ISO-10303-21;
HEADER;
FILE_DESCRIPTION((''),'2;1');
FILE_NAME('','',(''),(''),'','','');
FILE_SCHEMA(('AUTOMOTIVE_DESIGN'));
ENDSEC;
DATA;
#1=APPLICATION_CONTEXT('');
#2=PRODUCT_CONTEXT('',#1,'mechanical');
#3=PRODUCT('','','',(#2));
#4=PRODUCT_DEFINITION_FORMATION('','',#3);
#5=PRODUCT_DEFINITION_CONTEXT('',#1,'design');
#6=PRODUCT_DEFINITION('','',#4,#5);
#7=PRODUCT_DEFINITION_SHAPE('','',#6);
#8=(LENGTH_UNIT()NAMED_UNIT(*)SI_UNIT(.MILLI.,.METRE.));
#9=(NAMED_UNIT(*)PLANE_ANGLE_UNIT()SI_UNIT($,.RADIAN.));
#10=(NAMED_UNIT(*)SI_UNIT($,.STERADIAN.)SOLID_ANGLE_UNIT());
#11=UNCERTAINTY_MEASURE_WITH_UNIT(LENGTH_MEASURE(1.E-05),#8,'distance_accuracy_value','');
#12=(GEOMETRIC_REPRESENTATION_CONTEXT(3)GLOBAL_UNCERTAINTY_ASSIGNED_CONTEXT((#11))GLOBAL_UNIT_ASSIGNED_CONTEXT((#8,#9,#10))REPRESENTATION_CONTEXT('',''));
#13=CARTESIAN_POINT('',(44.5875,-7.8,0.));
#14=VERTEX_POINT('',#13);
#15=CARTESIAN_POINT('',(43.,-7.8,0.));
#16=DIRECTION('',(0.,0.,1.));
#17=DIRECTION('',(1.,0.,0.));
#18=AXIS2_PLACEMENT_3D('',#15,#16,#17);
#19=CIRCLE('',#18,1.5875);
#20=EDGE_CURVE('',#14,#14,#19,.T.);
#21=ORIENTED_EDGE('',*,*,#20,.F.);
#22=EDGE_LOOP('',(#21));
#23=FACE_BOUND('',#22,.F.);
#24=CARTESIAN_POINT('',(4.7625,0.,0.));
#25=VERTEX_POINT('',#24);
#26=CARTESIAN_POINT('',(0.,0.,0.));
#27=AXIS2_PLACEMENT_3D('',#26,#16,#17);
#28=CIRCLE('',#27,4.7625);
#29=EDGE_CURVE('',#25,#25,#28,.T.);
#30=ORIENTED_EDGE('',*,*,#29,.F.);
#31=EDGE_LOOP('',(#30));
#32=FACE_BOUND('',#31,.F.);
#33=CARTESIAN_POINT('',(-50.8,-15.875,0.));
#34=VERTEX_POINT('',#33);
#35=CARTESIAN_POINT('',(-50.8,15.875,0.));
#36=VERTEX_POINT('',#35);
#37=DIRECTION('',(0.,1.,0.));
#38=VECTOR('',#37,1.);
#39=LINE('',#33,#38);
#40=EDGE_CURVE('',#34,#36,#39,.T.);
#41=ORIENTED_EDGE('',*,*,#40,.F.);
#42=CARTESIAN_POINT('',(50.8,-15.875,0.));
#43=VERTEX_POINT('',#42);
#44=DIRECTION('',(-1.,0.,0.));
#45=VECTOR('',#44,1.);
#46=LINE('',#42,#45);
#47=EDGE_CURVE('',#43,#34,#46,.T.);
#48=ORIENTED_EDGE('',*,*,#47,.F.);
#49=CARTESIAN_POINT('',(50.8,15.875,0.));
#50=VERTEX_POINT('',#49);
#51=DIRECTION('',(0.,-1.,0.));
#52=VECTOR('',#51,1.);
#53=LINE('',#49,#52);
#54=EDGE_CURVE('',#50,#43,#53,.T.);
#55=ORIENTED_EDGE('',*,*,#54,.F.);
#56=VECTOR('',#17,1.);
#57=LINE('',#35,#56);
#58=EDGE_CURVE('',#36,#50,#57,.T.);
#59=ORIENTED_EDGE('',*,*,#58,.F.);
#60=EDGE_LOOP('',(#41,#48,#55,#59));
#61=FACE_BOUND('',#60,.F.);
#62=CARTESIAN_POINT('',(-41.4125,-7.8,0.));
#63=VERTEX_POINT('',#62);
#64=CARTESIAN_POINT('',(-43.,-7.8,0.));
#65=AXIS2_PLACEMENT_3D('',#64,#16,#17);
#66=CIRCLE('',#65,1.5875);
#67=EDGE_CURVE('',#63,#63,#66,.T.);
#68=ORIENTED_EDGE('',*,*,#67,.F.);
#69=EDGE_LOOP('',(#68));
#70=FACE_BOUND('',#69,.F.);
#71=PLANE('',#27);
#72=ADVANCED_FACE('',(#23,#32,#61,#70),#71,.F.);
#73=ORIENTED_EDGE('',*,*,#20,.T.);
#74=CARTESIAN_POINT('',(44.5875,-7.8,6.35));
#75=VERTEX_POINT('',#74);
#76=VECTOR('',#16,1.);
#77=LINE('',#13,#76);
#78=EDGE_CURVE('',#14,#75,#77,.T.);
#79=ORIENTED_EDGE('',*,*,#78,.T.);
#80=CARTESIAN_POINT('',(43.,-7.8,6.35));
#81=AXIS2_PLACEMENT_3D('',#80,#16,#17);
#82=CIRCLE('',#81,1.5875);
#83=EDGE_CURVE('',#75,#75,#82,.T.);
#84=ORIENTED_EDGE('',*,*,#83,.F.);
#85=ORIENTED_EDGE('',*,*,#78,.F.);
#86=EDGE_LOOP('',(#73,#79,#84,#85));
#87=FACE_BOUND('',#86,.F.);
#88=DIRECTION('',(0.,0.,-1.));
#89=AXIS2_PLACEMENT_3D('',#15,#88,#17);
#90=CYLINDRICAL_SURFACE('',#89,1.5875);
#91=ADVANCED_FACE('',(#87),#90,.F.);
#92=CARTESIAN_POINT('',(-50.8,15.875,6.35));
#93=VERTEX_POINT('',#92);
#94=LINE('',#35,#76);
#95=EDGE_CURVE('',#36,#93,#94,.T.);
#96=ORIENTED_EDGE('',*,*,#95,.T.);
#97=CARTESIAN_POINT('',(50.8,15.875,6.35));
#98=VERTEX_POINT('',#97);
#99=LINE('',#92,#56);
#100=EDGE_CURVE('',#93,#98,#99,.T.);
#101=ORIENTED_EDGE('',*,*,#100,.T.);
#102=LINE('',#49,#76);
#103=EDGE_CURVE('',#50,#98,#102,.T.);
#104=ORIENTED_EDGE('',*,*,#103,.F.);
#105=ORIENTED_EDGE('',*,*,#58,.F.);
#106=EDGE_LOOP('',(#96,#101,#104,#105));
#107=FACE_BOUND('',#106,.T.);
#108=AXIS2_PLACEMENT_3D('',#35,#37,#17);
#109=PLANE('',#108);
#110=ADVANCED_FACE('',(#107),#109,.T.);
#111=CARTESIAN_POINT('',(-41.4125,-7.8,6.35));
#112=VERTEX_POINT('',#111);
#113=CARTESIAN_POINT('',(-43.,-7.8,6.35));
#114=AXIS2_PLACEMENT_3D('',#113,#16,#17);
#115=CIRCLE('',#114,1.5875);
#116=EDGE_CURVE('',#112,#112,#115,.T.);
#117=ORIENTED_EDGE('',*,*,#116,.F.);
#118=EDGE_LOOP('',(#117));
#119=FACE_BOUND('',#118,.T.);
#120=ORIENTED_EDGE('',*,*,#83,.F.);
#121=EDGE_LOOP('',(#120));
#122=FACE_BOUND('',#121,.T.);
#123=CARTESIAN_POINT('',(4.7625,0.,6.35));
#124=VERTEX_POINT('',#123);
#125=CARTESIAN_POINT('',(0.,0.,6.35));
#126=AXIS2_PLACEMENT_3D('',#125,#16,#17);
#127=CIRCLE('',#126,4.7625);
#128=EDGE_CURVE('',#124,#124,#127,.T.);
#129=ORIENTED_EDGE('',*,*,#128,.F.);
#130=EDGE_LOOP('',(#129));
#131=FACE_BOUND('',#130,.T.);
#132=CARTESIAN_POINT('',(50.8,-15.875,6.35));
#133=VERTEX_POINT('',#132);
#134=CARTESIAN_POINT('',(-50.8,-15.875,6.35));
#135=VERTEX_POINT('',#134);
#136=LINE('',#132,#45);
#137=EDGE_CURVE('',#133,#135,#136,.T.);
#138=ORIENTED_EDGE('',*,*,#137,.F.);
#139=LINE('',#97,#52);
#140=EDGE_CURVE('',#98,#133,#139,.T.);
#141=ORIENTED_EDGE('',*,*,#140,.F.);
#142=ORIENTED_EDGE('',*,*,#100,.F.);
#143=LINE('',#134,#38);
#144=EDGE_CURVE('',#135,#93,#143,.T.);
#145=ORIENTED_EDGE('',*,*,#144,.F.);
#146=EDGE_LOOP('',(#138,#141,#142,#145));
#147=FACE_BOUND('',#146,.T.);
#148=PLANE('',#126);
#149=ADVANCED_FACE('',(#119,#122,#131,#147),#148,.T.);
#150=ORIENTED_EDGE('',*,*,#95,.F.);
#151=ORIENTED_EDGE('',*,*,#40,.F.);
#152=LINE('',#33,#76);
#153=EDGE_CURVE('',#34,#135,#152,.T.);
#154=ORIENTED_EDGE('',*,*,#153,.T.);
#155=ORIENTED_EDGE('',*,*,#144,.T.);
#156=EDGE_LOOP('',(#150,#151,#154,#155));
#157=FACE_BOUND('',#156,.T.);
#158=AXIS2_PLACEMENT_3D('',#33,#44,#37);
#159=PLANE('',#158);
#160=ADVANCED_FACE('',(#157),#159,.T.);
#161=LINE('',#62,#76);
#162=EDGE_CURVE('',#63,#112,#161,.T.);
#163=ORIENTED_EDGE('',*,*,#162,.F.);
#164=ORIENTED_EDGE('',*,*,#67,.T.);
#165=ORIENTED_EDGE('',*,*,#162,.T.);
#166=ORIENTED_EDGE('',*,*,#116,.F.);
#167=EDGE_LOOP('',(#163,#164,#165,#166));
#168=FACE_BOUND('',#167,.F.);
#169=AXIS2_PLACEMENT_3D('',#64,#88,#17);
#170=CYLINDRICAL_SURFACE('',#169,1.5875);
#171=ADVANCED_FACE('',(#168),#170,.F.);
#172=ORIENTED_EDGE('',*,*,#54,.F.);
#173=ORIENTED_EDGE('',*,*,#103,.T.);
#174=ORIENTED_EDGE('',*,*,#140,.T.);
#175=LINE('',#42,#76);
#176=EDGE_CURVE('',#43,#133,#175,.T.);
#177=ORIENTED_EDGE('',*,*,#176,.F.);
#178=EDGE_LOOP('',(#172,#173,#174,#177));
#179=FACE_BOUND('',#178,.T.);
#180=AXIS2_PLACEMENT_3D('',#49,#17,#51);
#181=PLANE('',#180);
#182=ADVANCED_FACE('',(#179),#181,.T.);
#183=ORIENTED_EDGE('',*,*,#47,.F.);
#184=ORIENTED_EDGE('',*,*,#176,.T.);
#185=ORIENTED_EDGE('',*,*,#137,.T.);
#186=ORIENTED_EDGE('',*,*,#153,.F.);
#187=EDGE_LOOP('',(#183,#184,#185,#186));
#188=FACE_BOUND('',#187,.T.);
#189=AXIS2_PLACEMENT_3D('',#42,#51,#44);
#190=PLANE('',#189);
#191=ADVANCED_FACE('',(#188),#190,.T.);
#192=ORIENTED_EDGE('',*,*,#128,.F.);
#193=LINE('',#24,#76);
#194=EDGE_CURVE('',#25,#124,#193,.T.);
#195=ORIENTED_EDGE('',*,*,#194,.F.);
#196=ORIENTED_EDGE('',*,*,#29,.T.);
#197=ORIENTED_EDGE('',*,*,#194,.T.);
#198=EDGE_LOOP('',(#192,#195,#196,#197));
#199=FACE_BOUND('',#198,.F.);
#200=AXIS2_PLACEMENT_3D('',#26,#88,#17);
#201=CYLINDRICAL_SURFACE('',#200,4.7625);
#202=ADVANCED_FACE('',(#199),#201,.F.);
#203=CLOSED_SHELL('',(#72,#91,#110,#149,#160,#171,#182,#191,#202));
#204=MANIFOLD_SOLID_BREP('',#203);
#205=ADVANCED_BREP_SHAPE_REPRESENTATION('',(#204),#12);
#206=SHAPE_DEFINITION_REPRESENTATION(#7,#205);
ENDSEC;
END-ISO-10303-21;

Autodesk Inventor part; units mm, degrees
ref_plane "YZ Plane" through (0, 0, 0) normal (1, 0, 0) x (0, 1, 0)
ref_plane "XZ Plane" through (0, 0, 0) normal (0, 1, 0) x (-1, 0, 0)
ref_plane "XY Plane" through (0, 0, 0) normal (0, 0, 1) x (1, 0, 0)
sketch "Sketch1" plane through (0, 0, 0) normal (0, 0, 1) x (1, 0, 0)
  point P0 (0, 0)
sketch "Sketch2" plane through (0, 0, 0) normal (0, 0, 1) x (1, 0, 0)
  line L0 (-50.8, 15.875) -> (50.8, 15.875)
  line L1 (50.8, 15.875) -> (50.8, -15.875)
  line L2 (50.8, -15.875) -> (-50.8, -15.875)
  line L3 (-50.8, -15.875) -> (-50.8, 15.875)
  circle A0 centre (0, 0) radius 4.7625
  circle A1 centre (43, -7.8) radius 1.5875
  circle A2 centre (-43, -7.8) radius 1.5875
  dimension "d0" = 101.6
  dimension "d1" = 31.75
  dimension "d3" = 50.8
  dimension "d4" = 15.875
  dimension "d5" = 15.875
  dimension "d6" = 9.525
  dimension "d7" = 3.175
  dimension "d8" = 3.175
  dimension "d9" = 7.8
  dimension "d10" = 43
  dimension "d11" = 43
  dimension "d12" = 7.8
extrude "Extrusion1" add sketch "Sketch2" along normal blind 6.35
properties part number "structural small" material "Polycarbonate, Clear"
